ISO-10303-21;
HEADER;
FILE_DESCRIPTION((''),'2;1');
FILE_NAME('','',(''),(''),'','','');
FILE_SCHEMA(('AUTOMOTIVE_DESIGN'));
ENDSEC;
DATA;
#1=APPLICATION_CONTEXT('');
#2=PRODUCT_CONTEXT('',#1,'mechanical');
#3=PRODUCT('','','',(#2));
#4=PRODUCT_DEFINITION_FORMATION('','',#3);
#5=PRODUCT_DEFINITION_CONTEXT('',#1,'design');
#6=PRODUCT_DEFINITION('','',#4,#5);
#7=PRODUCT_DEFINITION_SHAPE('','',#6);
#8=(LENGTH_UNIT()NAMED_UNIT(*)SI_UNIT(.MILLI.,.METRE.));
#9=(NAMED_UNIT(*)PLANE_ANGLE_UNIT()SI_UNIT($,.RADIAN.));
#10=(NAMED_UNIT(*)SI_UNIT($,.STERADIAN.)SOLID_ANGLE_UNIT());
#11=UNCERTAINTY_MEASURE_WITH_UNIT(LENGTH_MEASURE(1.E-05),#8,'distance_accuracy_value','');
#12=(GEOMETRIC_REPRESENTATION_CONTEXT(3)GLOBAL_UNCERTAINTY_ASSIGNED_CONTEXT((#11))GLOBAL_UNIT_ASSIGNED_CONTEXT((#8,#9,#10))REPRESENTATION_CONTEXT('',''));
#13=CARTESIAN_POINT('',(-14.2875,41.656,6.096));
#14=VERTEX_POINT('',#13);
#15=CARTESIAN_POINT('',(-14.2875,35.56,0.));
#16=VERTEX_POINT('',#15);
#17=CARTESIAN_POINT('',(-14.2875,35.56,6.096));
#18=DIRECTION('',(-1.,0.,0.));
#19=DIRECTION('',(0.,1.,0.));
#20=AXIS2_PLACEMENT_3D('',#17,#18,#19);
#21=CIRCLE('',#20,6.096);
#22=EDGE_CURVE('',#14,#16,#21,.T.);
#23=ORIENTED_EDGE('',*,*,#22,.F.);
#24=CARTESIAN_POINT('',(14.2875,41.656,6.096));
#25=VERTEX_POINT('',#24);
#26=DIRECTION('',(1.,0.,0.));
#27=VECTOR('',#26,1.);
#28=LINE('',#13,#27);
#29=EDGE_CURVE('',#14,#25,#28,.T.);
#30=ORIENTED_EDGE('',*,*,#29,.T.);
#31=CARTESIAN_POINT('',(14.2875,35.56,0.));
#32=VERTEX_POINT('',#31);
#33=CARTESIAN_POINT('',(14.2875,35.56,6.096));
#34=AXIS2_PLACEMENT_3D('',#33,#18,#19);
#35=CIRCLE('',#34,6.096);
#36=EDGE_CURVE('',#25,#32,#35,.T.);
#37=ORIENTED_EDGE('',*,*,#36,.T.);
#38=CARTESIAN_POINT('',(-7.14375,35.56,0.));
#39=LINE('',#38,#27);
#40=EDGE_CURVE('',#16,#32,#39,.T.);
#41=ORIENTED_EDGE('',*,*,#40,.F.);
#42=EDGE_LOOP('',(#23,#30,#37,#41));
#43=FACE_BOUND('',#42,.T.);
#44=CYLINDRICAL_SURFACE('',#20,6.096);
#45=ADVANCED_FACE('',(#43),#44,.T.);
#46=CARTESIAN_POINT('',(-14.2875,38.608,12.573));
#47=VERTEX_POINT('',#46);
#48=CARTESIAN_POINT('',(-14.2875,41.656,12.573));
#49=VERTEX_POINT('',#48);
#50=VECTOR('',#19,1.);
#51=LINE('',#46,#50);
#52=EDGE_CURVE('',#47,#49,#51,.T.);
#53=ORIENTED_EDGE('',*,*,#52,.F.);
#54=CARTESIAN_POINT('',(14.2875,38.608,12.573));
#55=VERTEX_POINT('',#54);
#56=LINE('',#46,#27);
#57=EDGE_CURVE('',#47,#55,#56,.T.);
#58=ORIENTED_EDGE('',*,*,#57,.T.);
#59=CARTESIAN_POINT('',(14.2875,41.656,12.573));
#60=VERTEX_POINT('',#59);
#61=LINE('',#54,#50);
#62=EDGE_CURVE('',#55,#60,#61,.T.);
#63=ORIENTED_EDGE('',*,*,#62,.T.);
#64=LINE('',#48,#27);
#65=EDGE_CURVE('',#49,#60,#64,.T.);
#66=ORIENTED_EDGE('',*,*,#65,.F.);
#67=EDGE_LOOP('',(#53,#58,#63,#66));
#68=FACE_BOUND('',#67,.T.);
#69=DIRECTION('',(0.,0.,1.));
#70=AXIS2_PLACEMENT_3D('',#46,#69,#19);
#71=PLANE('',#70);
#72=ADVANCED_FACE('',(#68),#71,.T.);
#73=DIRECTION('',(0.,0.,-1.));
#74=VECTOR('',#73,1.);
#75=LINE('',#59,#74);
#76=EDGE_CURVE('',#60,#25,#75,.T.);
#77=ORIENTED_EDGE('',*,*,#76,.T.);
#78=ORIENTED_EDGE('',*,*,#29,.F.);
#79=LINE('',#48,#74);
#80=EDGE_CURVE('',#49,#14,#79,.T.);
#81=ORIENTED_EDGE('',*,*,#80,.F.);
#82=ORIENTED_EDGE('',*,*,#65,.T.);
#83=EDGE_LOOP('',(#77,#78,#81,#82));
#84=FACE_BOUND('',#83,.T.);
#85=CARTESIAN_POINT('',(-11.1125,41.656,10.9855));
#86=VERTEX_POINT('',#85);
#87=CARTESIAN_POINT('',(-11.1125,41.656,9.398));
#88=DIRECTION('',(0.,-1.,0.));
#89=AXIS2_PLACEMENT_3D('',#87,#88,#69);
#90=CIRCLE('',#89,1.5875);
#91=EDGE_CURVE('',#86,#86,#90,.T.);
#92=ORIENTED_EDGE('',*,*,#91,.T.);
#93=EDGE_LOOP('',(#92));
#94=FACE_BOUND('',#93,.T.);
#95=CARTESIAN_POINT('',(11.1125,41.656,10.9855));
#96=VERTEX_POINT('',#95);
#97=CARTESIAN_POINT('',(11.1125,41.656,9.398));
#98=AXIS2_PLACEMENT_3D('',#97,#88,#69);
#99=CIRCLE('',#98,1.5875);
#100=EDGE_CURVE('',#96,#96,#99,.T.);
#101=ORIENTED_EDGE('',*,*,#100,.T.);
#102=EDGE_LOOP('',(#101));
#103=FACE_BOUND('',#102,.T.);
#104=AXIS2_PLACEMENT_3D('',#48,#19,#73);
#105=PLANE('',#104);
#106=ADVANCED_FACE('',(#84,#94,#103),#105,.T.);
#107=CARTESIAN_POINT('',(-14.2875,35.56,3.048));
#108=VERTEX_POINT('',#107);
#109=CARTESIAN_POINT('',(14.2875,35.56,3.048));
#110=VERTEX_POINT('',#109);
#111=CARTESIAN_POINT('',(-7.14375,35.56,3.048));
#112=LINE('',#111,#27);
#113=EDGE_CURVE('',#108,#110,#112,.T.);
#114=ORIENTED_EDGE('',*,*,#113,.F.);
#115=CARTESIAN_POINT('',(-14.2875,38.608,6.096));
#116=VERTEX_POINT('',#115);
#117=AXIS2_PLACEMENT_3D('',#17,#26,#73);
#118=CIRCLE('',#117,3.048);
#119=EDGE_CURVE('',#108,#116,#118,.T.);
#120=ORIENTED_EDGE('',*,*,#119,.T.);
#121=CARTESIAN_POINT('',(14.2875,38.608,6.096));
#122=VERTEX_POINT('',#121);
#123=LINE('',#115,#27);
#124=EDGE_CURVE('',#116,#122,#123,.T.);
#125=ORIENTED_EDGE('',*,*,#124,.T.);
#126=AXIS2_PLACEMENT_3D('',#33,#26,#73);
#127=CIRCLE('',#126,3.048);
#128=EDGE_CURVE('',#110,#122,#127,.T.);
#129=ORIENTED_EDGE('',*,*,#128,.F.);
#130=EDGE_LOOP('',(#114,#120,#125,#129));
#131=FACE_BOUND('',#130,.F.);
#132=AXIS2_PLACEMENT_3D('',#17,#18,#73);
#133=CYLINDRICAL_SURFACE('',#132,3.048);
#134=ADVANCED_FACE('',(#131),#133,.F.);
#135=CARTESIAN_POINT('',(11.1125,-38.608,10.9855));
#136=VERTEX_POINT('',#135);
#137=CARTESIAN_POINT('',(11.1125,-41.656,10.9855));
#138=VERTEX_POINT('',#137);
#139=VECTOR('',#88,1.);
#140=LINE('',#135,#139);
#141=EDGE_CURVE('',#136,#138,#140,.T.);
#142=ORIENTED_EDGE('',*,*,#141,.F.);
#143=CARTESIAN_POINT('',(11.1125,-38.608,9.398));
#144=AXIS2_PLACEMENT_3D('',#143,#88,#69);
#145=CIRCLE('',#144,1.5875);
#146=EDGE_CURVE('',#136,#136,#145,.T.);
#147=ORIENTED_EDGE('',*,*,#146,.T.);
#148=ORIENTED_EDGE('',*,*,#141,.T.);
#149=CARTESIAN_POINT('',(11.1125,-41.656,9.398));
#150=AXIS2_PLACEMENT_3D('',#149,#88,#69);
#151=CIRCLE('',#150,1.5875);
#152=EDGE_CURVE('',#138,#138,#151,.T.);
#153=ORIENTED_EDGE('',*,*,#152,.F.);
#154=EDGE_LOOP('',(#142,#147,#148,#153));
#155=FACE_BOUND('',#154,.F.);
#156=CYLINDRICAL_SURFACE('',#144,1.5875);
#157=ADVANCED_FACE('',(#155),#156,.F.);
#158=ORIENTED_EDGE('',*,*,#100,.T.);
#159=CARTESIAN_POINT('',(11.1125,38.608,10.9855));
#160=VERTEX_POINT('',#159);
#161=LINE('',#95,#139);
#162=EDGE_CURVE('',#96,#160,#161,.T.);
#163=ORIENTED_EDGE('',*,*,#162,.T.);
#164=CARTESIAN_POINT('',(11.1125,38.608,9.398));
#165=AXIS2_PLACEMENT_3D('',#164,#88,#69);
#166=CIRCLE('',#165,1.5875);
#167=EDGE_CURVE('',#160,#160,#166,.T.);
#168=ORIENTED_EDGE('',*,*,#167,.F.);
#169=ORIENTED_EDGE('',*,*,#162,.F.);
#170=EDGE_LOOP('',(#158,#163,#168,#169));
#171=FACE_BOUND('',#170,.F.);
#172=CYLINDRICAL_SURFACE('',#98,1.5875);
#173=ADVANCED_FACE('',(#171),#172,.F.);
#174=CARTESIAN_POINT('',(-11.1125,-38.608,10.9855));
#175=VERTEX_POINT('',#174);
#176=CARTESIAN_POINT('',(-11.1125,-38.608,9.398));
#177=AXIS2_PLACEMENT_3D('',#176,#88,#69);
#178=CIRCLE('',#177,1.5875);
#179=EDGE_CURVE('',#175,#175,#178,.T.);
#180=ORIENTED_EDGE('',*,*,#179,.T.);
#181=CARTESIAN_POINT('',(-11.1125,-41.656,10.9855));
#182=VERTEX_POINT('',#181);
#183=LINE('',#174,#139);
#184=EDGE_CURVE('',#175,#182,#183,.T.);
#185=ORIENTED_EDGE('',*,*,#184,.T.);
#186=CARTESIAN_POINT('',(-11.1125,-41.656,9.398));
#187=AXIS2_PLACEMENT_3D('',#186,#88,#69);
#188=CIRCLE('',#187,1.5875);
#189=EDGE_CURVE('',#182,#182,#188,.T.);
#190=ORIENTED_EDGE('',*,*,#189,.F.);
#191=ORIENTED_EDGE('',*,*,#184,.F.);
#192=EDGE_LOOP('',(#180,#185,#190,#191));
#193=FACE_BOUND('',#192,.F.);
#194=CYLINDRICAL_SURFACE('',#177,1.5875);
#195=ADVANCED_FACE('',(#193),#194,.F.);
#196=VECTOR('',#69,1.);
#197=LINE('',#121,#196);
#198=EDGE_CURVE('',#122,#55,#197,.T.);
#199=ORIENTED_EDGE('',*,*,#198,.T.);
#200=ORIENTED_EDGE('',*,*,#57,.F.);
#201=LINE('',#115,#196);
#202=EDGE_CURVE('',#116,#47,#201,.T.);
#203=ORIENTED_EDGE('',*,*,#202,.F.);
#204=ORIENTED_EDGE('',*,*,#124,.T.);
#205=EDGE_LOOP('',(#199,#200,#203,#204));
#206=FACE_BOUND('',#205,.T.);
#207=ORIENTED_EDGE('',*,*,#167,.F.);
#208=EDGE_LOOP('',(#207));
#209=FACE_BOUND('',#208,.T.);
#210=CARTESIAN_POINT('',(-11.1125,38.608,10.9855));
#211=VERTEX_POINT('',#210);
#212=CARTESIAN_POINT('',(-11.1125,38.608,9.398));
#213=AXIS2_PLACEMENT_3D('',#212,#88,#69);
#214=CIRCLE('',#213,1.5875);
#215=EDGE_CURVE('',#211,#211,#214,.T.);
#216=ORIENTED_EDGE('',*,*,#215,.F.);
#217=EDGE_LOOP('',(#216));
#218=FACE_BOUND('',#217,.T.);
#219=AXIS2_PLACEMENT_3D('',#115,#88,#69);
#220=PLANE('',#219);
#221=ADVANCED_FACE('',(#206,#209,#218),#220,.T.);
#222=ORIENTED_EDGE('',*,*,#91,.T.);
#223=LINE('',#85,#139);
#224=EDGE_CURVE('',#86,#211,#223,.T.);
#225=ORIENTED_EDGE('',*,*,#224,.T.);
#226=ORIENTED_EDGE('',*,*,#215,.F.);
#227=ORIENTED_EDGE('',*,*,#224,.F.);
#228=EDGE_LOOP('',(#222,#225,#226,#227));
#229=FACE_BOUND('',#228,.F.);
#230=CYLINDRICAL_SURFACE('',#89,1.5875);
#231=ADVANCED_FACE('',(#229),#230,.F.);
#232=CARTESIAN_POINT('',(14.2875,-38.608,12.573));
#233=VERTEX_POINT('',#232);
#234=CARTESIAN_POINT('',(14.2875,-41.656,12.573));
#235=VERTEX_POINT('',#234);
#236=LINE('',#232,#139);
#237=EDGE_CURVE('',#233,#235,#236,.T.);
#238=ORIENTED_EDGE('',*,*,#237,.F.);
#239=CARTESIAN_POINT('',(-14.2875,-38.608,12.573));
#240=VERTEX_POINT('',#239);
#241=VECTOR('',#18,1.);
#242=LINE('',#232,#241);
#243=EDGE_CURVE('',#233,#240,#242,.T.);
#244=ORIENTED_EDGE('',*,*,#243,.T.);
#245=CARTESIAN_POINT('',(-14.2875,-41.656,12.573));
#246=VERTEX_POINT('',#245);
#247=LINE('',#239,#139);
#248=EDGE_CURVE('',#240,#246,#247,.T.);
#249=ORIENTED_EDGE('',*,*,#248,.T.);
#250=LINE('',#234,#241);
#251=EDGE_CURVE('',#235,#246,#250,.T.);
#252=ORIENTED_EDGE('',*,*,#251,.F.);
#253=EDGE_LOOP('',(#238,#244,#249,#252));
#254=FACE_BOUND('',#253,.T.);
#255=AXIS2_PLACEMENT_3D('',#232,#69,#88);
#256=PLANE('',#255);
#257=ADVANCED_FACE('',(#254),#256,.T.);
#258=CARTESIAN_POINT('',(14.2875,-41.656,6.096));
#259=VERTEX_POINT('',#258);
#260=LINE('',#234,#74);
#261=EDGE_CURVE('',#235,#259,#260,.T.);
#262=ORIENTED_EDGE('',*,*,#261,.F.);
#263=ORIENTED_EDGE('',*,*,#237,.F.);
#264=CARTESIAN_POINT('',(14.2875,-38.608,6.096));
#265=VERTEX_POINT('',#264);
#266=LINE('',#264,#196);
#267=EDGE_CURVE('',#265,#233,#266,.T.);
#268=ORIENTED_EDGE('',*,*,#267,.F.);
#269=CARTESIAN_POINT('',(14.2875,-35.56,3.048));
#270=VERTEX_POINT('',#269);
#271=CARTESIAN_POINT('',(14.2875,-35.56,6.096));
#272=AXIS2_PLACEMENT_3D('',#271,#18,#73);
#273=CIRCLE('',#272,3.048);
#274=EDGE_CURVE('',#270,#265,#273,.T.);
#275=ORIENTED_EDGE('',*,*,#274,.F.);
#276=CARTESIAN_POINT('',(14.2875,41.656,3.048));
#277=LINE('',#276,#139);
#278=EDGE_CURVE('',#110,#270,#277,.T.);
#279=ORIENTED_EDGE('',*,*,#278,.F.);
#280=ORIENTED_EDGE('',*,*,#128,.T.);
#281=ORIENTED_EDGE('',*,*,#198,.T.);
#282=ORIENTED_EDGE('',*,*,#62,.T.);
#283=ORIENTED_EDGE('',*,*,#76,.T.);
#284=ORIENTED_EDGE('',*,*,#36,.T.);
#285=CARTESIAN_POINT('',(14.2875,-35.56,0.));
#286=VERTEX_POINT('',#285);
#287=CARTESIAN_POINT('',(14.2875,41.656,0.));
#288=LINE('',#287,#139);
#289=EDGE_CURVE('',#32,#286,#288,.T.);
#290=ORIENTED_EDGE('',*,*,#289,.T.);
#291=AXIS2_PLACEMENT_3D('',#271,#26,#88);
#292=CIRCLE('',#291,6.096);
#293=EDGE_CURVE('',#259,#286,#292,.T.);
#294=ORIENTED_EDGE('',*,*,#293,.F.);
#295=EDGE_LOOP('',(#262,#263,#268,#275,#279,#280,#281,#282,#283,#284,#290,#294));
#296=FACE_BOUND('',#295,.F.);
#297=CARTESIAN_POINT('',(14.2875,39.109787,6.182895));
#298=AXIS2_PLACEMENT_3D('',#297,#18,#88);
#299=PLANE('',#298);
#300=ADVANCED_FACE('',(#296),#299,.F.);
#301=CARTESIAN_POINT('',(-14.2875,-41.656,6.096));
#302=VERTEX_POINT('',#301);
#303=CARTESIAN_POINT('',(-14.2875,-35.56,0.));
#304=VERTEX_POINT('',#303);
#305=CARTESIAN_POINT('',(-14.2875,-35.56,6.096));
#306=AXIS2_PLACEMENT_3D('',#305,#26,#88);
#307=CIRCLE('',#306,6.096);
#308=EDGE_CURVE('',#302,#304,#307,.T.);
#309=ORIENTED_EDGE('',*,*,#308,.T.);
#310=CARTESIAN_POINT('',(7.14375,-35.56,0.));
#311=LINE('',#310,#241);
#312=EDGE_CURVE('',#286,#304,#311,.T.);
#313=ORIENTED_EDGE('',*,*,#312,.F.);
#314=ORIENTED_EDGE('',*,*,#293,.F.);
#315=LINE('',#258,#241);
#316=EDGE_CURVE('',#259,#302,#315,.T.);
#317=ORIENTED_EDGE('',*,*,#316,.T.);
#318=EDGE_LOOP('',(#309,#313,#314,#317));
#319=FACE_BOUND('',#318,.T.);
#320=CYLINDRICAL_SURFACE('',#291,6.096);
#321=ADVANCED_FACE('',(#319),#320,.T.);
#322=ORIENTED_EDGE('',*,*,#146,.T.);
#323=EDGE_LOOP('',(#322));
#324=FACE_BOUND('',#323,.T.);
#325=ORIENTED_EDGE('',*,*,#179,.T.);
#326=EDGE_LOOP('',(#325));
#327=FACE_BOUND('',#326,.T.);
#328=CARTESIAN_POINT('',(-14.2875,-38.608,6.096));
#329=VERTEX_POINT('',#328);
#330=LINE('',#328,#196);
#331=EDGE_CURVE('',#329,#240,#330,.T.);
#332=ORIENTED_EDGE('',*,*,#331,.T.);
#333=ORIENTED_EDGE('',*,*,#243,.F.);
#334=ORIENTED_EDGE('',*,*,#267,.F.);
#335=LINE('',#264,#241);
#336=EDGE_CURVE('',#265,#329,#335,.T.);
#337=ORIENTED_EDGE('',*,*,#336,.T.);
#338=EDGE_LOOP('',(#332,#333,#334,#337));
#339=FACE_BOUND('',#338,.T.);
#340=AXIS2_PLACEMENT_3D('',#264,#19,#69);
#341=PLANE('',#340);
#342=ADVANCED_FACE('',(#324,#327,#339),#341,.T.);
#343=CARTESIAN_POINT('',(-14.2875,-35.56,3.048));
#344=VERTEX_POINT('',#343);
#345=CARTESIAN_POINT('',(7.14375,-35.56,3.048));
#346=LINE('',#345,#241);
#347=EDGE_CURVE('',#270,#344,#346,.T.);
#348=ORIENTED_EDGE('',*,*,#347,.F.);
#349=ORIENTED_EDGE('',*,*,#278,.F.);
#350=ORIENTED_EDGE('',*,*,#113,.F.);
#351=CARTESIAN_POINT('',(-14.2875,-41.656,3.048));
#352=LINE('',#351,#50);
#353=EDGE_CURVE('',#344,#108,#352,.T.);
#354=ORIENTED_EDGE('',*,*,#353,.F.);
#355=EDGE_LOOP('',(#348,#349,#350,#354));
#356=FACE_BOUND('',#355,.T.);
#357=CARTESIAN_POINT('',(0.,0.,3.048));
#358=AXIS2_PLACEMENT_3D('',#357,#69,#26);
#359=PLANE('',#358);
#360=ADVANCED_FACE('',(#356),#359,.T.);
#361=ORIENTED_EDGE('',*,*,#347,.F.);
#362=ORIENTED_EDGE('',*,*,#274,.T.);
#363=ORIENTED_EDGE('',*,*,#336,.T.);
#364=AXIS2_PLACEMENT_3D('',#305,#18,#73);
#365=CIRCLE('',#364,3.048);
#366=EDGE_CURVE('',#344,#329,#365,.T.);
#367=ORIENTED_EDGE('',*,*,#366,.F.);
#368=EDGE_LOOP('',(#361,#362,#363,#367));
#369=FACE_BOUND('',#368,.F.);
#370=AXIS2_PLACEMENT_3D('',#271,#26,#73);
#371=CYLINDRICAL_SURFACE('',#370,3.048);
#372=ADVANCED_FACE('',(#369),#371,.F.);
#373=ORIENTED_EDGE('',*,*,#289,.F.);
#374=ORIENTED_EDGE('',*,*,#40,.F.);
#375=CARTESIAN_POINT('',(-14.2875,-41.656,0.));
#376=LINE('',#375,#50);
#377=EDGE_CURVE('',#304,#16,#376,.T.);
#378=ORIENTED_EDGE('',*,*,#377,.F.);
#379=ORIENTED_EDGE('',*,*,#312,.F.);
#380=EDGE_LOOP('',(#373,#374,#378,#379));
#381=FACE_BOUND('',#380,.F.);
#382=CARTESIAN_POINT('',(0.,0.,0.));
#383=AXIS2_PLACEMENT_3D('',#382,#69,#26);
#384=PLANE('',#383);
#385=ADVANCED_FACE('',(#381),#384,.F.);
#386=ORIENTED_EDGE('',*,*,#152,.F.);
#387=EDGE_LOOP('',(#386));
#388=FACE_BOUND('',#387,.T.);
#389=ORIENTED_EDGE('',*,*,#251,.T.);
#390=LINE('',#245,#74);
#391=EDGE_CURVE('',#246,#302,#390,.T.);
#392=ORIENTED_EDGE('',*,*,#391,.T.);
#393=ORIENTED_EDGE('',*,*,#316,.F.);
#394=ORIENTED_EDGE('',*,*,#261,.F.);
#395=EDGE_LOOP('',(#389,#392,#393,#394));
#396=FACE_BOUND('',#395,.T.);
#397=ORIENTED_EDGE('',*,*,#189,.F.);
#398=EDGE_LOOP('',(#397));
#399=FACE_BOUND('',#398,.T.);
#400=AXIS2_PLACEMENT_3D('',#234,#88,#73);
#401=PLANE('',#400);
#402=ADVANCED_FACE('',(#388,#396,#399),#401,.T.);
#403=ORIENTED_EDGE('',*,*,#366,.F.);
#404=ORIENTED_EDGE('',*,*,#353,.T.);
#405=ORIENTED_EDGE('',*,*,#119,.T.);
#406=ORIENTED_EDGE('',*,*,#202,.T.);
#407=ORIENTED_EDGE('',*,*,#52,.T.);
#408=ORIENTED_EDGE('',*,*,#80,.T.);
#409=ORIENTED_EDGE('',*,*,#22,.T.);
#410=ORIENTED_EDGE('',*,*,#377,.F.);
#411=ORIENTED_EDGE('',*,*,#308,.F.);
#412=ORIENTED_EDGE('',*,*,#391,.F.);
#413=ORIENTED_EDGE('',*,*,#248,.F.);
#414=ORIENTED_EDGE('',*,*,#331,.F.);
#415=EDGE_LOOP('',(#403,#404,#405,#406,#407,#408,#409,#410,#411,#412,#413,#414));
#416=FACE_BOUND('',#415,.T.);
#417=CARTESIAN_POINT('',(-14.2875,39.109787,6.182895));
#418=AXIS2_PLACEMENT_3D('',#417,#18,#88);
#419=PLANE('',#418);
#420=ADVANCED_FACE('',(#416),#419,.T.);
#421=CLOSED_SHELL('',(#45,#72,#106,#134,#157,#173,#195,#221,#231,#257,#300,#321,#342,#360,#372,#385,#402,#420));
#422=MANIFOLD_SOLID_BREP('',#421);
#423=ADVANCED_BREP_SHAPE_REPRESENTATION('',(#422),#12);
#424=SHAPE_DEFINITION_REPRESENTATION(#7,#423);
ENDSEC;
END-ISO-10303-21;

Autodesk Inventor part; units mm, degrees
ref_plane "YZ Plane" through (0, 0, 0) normal (1, 0, 0) x (0, 1, 0)
ref_plane "XZ Plane" through (0, 0, 0) normal (0, 1, 0) x (-1, 0, 0)
ref_plane "XY Plane" through (0, 0, 0) normal (0, 0, 1) x (1, 0, 0)
sketch "Sketch1" plane through (0, 0, 0) normal (0, 0, 1) x (1, 0, 0)
  line L0 (-14.2875, 41.656) -> (14.2875, 41.656)
  line L1 (14.2875, 41.656) -> (14.2875, -41.656)
  line L2 (14.2875, -41.656) -> (-14.2875, -41.656)
  line L3 (-14.2875, -41.656) -> (-14.2875, 41.656)
  point P0 (0, 0)
  dimension "d0" = 28.575
  dimension "d1" = 83.312
  dimension "d2" = 14.2875
  dimension "d3" = 41.656
extrude "Plate2" add sketch "Sketch1" along normal blind 3.048
sketch "Sketch2" plane through (-14.2875, 38.608, 0) normal (0, 1, 0) x (-1, 0, 0)
  line L0 (-28.575, 0) -> (0, 0)
  line L1 (0, 0) -> (0, 12.573)
  line L2 (0, 12.573) -> (-28.575, 12.573)
  line L3 (-28.575, 12.573) -> (-28.575, 0)
edge flange "Flange1" height 9.525 angle 90 thickness 3.048 bend radius 3.048 thickness toward (0, 1, 0) relief tear relief width 3.048 relief depth 1.524 corner gap 3.048 corner form 0 edges at (0, 41.656, 3.048) (0, -41.656, 3.048) wall of the first edge with corners at (14.2875, 38.608, 0) (-14.2875, 38.608, 0) (-14.2875, 38.608, 12.573) (14.2875, 38.608, 12.573)
bend "Bend1"
corner "Corner1"
sketch "Sketch3" plane through (-14.2875, -38.608, 12.573) normal (0, 1, 0) x (1, 0, 0)
  line L0 (0, 0) -> (0, 6.477) projected
  line L1 (0, 0) -> (28.575, 0) projected
  line L2 (28.575, 0) -> (28.575, 6.477) projected
  point P0 (14.2875, 12.573)
  point P1 (3.175, 3.175)
  point P2 (25.4, 3.175)
  dimension "d16" = 3.175
  dimension "d17" = 3.175
  dimension "d18" = 3.175
  dimension "d19" = 3.175
hole "Hole1" at (-11.1125, -38.608, 9.398) at (11.1125, -38.608, 9.398) direction (0, -1, 0) diameter 3.175 end through all
sketch "Sketch5" plane through (-14.2875, 41.656, 12.573) normal (0, 1, 0) x (1, 0, 0)
  circle A0 centre (3.175, 3.175) radius 1.5875 projected
  circle A1 centre (25.4, 3.175) radius 1.5875 projected
  point P0 (14.2875, 12.573)
hole "Hole2" at (-11.1125, 41.656, 9.398) at (11.1125, 41.656, 9.398) direction (0, -1, 0) diameter 3.175 end through all
equation "\"d18\" = d17"
equation "\"d19\" = d16"
equation "\"d25\" = Thickness"
equation "\"d32\" = Thickness"
equation "\"d6\" = BendReliefWidth"
equation "\"d7\" = BendReliefDepth"
equation "\"d8\" = MinimumRemnant"
equation "\"d9\" = BendRadius"
equation "\"d12\" = BendRadius"
equation "\"d13\" = CornerReliefSize"
equation "\"d14\" = GapSize"
equation "\"d15\" = JacobiRadiusSize"
equation "\"d2\" = 0.5 * d0"
equation "\"d3\" = 0.5 * d1"
equation "\"BendRadius\" = Thickness"
equation "\"BendReliefWidth\" = Thickness"
equation "\"BendReliefDepth\" = 0.5 * Thickness"
equation "\"CornerReliefSize\" = 4 * Thickness"
equation "\"MinimumRemnant\" = 2 * Thickness"
equation "\"TransitionRadius\" = BendRadius"
equation "\"JacobiRadiusSize\" = BendRadius"
equation "\"GapSize\" = Thickness"
equation "\"d4\" = BendRadius"
equation "\"d5\" = BendRadius"
equation "\"Thickness\" = 3.048"
properties part number "gearbox rib"
